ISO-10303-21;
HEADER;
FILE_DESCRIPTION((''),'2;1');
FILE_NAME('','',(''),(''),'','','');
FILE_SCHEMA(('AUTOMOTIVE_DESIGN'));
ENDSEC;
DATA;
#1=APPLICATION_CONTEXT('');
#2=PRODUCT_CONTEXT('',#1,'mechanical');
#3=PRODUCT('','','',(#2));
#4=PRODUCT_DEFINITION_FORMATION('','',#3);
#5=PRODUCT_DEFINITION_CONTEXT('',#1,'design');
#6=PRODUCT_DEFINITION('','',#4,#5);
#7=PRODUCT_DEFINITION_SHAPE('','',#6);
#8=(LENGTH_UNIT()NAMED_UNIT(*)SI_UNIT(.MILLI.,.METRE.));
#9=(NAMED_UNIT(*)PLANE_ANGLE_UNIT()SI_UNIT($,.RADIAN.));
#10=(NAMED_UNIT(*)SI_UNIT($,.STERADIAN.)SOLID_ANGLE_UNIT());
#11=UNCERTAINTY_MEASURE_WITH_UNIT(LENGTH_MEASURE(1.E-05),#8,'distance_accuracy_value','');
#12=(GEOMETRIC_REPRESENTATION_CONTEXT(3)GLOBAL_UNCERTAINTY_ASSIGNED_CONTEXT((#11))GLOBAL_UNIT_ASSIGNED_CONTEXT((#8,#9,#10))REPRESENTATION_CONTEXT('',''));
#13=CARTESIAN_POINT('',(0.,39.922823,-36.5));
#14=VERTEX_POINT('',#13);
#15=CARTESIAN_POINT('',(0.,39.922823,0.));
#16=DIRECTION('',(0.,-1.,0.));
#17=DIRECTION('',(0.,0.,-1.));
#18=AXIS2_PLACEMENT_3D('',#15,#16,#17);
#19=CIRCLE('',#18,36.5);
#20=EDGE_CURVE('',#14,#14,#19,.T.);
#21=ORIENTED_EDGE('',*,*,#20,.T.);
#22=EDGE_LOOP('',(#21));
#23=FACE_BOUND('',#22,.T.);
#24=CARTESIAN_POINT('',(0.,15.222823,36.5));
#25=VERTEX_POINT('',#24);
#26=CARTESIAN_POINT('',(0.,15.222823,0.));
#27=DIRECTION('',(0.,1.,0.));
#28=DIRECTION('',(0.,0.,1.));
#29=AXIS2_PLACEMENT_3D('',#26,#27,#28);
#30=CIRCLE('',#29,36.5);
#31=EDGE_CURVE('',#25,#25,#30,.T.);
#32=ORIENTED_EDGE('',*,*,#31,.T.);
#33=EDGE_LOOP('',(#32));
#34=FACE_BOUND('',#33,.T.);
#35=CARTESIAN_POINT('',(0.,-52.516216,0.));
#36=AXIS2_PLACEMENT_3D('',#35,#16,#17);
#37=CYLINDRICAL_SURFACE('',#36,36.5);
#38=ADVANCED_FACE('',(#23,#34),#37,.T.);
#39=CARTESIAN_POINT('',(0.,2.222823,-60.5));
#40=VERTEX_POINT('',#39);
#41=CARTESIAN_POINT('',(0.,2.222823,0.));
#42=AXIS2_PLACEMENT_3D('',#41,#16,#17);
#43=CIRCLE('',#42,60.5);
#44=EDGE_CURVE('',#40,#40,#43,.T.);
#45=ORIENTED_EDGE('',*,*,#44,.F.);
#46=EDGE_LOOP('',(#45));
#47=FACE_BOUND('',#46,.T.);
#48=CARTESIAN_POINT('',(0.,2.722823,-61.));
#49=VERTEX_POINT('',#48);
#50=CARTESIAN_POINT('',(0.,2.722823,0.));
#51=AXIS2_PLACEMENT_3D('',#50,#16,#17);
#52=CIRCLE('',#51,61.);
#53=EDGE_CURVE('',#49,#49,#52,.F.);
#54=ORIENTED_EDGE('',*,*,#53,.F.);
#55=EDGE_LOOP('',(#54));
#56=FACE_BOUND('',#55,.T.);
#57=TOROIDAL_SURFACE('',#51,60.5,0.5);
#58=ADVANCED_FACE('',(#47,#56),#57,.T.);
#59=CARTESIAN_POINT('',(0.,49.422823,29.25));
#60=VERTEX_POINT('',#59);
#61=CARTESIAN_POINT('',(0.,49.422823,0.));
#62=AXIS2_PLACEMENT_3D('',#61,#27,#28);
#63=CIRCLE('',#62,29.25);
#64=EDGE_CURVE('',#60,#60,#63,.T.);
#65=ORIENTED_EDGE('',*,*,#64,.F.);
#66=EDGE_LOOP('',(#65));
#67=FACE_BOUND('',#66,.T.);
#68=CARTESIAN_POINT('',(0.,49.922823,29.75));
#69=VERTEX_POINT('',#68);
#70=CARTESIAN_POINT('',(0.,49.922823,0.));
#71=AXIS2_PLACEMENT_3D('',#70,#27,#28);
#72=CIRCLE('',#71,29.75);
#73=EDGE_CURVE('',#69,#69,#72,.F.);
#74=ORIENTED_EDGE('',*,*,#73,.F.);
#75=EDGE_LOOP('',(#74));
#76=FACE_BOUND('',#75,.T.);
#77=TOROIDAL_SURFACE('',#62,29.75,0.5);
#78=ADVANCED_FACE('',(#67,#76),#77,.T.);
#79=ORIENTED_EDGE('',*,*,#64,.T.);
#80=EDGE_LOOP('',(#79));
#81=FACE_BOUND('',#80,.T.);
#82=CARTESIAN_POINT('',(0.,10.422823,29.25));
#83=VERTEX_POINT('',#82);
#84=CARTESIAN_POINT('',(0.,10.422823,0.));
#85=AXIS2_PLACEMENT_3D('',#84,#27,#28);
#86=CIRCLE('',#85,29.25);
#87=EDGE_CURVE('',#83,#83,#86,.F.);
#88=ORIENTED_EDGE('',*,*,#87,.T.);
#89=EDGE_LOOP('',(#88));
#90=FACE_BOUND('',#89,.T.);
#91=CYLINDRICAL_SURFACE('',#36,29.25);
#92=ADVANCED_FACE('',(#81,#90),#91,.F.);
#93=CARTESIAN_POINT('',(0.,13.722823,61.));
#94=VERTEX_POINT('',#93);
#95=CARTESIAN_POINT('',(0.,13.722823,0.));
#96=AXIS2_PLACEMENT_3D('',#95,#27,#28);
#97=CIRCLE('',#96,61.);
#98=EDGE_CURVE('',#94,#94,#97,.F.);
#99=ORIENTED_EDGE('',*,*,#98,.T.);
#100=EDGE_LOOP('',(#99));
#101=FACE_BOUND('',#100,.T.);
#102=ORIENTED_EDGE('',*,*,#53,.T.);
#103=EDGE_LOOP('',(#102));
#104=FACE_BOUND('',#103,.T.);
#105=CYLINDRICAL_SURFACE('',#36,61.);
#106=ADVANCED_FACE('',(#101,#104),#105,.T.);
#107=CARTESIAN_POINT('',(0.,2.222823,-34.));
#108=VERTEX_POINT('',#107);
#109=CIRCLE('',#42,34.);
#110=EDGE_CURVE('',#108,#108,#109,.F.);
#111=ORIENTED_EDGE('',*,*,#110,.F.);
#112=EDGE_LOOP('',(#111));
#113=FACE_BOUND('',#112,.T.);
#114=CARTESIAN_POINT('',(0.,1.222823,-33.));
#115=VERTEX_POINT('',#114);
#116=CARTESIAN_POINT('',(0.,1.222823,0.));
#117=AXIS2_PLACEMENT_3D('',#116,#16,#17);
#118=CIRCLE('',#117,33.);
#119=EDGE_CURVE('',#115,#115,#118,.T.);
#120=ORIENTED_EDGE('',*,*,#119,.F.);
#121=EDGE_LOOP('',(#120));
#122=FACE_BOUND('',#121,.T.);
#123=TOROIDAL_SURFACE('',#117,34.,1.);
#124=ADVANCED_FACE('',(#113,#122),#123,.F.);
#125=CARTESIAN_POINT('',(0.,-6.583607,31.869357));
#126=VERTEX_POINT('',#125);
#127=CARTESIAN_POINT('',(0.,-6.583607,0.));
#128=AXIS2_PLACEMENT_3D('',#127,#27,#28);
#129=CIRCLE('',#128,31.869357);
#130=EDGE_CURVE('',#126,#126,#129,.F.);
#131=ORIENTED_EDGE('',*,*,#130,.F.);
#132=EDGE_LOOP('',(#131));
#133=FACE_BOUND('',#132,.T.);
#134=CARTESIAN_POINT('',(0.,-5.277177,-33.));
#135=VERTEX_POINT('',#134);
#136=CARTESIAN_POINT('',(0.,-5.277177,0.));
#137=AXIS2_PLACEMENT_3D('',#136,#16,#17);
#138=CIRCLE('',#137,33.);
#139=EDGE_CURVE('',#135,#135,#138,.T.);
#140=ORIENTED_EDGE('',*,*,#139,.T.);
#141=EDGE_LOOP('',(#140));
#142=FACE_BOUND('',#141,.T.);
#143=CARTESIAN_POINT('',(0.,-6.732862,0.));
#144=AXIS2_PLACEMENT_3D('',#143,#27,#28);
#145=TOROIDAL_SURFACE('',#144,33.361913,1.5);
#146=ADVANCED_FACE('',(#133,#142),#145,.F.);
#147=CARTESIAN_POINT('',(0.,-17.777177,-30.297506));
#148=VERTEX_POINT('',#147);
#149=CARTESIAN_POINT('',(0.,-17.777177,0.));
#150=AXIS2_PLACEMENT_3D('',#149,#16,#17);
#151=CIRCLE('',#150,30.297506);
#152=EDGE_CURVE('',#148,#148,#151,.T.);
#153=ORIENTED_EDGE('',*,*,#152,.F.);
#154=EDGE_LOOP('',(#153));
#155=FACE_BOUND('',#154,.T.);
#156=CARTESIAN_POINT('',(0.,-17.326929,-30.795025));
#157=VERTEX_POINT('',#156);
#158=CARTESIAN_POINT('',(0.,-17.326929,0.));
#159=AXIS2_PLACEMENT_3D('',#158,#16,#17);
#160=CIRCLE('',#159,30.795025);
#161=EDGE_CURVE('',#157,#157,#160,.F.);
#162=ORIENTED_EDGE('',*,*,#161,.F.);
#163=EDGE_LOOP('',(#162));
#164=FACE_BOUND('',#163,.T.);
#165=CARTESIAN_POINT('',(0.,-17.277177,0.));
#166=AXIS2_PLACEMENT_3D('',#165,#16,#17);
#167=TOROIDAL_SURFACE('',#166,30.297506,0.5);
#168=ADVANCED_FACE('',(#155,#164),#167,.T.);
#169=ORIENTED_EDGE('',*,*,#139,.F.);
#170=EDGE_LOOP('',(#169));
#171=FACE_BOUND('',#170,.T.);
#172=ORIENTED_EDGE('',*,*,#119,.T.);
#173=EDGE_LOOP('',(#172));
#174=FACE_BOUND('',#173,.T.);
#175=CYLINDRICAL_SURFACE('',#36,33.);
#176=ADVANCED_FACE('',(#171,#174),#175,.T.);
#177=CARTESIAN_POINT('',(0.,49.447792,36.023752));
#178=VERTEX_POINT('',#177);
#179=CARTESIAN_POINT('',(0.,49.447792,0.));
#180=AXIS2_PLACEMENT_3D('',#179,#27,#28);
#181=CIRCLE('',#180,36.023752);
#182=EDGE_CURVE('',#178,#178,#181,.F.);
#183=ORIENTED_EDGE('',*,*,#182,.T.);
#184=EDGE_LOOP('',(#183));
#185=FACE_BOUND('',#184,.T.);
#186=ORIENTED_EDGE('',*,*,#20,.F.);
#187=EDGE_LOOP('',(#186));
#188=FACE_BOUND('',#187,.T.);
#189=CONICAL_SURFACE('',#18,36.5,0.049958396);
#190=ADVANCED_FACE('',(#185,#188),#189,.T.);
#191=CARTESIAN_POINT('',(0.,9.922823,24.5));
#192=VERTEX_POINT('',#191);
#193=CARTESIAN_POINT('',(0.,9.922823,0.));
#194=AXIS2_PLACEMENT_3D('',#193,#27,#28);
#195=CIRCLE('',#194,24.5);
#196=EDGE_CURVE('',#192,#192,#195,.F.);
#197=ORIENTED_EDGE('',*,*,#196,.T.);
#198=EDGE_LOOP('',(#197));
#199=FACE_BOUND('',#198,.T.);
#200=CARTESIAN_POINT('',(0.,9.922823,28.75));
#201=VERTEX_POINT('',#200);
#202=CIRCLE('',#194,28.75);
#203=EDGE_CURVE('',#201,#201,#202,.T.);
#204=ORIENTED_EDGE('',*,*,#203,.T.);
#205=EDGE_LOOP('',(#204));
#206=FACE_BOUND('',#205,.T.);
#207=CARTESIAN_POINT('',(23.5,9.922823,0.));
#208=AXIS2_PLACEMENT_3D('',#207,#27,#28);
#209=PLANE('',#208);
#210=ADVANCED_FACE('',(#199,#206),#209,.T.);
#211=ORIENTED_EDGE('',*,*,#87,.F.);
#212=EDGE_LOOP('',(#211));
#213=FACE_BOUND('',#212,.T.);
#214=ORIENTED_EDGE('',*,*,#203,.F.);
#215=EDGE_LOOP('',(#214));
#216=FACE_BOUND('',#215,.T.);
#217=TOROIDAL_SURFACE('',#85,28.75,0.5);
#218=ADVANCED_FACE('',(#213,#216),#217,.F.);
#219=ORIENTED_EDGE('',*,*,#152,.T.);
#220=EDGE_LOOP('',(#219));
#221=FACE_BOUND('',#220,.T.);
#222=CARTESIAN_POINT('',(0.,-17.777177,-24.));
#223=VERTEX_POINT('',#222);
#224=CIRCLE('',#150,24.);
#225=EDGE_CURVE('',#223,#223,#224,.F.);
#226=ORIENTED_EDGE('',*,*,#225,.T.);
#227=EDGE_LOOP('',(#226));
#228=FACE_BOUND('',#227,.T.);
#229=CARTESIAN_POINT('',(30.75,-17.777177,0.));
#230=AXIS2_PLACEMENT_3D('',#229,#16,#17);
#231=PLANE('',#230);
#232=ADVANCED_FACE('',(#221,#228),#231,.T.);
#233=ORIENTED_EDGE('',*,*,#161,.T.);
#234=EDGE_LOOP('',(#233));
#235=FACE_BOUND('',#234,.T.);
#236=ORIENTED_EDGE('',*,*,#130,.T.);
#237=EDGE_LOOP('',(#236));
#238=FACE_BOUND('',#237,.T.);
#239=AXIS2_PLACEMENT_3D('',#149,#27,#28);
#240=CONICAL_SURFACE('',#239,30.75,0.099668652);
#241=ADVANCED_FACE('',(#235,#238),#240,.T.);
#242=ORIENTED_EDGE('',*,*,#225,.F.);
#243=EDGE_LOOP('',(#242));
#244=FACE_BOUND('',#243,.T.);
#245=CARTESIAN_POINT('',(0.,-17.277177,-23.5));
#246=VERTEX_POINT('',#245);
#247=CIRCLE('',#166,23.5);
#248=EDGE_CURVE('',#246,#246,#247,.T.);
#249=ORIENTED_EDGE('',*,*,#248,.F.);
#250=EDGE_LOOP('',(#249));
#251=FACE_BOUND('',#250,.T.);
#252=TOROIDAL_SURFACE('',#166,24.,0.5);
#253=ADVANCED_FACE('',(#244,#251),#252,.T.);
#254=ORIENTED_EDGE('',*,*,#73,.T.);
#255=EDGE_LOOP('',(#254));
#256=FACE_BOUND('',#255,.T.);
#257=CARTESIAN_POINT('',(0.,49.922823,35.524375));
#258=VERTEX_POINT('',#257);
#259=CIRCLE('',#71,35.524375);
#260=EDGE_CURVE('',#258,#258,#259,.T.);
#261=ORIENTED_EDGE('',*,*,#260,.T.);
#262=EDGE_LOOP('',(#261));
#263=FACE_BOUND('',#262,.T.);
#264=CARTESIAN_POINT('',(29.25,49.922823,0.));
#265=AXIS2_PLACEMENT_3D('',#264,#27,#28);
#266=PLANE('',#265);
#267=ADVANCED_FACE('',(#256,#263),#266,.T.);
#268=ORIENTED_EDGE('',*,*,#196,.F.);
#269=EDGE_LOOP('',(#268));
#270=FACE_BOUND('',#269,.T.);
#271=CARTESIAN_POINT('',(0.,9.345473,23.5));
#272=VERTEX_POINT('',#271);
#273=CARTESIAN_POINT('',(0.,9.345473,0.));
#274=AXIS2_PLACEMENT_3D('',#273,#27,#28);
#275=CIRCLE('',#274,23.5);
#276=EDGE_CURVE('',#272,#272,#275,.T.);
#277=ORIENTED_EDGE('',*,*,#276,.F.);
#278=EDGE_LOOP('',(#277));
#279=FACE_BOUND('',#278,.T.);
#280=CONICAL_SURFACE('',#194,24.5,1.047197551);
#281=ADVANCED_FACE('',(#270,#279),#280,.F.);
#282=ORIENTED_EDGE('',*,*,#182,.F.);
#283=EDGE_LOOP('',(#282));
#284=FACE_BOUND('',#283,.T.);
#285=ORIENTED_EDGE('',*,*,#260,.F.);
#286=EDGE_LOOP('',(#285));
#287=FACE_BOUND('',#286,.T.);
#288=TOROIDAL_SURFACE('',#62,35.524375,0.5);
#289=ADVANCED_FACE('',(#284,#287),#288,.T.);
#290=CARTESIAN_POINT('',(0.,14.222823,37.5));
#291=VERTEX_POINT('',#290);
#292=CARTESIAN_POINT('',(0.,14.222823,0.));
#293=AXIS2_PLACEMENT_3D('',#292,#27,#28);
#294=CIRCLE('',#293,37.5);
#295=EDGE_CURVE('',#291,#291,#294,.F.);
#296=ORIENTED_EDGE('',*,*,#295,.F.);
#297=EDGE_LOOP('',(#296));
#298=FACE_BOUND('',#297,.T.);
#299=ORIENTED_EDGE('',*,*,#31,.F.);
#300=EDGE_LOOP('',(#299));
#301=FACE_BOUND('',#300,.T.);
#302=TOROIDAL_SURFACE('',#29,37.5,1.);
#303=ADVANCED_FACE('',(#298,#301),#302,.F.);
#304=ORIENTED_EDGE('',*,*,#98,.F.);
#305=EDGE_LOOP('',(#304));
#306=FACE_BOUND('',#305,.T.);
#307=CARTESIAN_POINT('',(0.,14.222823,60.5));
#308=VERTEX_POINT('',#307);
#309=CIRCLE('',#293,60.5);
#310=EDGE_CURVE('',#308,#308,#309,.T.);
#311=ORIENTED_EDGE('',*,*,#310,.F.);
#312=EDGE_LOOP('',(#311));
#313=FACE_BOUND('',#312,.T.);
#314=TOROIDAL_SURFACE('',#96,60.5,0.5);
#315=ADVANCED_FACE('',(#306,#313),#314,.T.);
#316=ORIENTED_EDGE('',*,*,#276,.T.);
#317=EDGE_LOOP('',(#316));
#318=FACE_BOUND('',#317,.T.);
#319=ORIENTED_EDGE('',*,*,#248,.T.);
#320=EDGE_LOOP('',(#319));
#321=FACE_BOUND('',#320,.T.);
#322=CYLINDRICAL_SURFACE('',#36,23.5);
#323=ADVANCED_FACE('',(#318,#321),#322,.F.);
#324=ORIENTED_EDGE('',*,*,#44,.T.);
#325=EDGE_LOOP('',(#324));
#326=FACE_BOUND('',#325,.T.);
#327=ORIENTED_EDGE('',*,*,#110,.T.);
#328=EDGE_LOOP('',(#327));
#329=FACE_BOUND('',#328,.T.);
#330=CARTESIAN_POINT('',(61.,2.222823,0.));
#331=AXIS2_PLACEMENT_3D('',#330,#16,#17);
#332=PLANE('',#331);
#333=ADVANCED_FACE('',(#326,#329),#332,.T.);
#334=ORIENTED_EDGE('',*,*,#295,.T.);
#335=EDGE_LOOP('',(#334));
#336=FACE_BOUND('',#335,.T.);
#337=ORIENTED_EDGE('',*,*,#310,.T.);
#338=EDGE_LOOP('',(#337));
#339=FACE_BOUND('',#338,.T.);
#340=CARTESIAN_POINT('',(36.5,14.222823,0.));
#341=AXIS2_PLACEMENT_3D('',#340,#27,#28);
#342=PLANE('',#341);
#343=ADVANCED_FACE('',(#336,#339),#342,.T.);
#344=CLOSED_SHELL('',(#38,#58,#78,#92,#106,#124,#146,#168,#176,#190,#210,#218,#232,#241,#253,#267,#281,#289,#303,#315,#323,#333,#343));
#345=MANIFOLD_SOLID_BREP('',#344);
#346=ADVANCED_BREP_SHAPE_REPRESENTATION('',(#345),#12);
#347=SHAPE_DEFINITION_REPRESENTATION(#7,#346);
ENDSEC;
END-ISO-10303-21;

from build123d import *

# Parameters (mm, degrees)
FILETE1_R      = 0.5
FILETE2_R      = 1
CHANFRO1_SIZE  = 1
CHANFRO1_SIZE2 = 0.577350269
FILETE3_R      = 0.5
FILETE4_R      = 1.5
FILETE5_R      = 0.5
FILETE6_R      = 1


with BuildPart() as part:
    # Esboço1 → Revolução1 (revolve)
    with BuildSketch(Plane.XY, mode=Mode.PRIVATE) as revolu_o1_sk:
        Polygon((29.25, 49.922822823), (36, 49.922822823), (36.5, 39.922822823), (36.5, 14.222822823), (61, 14.222822823), (61, 2.222822823), (33, 2.222822823), (33, -5.277177177), (32, -5.277177177), (30.75, -17.777177177), (23.5, -17.777177177), (23.5, 9.922822823), (29.25, 9.922822823), align=None)
    revolve(revolu_o1_sk.sketch.rotate(Axis((0, -52.516216216, 0), (0, 1, 0)), 90), axis=Axis((0, -52.516216216, 0), (0, 1, 0)))

    # Filete1
    filete1_edges = [part.edges().sort_by_distance(p)[0] for p in [
        (0, 2.222822823, 61),
        (0, 14.222822823, 61),
        (0, 49.922822823, 36),
        (0, 49.922822823, 29.25),
    ]]
    fillet(filete1_edges, radius=FILETE1_R)

    # Filete2
    filete2_edges = [part.edges().sort_by_distance(p)[0] for p in [
        (0, 14.222822823, 36.5),
    ]]
    fillet(filete2_edges, radius=FILETE2_R)

    # Chanfro1
    chanfro1_edges = [part.edges().sort_by_distance(p)[0] for p in [
        (0, 9.922822823, 23.5),
    ]]
    chanfro1_side = [part.faces().sort_by_distance(p)[0] for p in [
        (0, 9.922822823, 24.327314934),
    ]]
    chamfer(chanfro1_edges, length=CHANFRO1_SIZE, length2=CHANFRO1_SIZE2, reference=chanfro1_side[0])

    # Filete3
    filete3_edges = [part.edges().sort_by_distance(p)[0] for p in [
        (0, 9.922822823, 29.25),
    ]]
    fillet(filete3_edges, radius=FILETE3_R)

    # Filete4
    # the kernel refuses this fillet: 1.5 mm, written as the material it adds along each edge
    with BuildSketch(Plane(origin=(0, -5.277177177, 0), x_dir=(0, 0, -1), z_dir=(1, 0, 0))) as filete4_piece_1:
        with BuildLine():
            CenterArc((33.361912833, -1.455685097), FILETE4_R, 103.961817235, 70.327589628)
            Line((33, 0), (32.992761743, 0.029113702))
            ThreePointArc((32.992761743, 0.029113702), (32.5, 0.03), (32, 0.03))
            Line((32, 0.03), (31.970148884, 0.002985112))
            Line((31.970148884, 0.002985112), (31.839505932, -1.303444407))
            Line((31.839505932, -1.303444407), (31.869357048, -1.306429518))
        make_face()
    revolve(axis=Axis((0, -5.277177177, 0), (0, 1, 0)))

    # Filete5
    filete5_edges = [part.edges().sort_by_distance(p)[0] for p in [
        (0, -17.777177177, 30.75),
        (0, -17.777177177, 23.5),
    ]]
    fillet(filete5_edges, radius=FILETE5_R)

    # Filete6
    filete6_edges = [part.edges().sort_by_distance(p)[0] for p in [
        (0, 2.222822823, 33),
    ]]
    fillet(filete6_edges, radius=FILETE6_R)


solid = part.part
